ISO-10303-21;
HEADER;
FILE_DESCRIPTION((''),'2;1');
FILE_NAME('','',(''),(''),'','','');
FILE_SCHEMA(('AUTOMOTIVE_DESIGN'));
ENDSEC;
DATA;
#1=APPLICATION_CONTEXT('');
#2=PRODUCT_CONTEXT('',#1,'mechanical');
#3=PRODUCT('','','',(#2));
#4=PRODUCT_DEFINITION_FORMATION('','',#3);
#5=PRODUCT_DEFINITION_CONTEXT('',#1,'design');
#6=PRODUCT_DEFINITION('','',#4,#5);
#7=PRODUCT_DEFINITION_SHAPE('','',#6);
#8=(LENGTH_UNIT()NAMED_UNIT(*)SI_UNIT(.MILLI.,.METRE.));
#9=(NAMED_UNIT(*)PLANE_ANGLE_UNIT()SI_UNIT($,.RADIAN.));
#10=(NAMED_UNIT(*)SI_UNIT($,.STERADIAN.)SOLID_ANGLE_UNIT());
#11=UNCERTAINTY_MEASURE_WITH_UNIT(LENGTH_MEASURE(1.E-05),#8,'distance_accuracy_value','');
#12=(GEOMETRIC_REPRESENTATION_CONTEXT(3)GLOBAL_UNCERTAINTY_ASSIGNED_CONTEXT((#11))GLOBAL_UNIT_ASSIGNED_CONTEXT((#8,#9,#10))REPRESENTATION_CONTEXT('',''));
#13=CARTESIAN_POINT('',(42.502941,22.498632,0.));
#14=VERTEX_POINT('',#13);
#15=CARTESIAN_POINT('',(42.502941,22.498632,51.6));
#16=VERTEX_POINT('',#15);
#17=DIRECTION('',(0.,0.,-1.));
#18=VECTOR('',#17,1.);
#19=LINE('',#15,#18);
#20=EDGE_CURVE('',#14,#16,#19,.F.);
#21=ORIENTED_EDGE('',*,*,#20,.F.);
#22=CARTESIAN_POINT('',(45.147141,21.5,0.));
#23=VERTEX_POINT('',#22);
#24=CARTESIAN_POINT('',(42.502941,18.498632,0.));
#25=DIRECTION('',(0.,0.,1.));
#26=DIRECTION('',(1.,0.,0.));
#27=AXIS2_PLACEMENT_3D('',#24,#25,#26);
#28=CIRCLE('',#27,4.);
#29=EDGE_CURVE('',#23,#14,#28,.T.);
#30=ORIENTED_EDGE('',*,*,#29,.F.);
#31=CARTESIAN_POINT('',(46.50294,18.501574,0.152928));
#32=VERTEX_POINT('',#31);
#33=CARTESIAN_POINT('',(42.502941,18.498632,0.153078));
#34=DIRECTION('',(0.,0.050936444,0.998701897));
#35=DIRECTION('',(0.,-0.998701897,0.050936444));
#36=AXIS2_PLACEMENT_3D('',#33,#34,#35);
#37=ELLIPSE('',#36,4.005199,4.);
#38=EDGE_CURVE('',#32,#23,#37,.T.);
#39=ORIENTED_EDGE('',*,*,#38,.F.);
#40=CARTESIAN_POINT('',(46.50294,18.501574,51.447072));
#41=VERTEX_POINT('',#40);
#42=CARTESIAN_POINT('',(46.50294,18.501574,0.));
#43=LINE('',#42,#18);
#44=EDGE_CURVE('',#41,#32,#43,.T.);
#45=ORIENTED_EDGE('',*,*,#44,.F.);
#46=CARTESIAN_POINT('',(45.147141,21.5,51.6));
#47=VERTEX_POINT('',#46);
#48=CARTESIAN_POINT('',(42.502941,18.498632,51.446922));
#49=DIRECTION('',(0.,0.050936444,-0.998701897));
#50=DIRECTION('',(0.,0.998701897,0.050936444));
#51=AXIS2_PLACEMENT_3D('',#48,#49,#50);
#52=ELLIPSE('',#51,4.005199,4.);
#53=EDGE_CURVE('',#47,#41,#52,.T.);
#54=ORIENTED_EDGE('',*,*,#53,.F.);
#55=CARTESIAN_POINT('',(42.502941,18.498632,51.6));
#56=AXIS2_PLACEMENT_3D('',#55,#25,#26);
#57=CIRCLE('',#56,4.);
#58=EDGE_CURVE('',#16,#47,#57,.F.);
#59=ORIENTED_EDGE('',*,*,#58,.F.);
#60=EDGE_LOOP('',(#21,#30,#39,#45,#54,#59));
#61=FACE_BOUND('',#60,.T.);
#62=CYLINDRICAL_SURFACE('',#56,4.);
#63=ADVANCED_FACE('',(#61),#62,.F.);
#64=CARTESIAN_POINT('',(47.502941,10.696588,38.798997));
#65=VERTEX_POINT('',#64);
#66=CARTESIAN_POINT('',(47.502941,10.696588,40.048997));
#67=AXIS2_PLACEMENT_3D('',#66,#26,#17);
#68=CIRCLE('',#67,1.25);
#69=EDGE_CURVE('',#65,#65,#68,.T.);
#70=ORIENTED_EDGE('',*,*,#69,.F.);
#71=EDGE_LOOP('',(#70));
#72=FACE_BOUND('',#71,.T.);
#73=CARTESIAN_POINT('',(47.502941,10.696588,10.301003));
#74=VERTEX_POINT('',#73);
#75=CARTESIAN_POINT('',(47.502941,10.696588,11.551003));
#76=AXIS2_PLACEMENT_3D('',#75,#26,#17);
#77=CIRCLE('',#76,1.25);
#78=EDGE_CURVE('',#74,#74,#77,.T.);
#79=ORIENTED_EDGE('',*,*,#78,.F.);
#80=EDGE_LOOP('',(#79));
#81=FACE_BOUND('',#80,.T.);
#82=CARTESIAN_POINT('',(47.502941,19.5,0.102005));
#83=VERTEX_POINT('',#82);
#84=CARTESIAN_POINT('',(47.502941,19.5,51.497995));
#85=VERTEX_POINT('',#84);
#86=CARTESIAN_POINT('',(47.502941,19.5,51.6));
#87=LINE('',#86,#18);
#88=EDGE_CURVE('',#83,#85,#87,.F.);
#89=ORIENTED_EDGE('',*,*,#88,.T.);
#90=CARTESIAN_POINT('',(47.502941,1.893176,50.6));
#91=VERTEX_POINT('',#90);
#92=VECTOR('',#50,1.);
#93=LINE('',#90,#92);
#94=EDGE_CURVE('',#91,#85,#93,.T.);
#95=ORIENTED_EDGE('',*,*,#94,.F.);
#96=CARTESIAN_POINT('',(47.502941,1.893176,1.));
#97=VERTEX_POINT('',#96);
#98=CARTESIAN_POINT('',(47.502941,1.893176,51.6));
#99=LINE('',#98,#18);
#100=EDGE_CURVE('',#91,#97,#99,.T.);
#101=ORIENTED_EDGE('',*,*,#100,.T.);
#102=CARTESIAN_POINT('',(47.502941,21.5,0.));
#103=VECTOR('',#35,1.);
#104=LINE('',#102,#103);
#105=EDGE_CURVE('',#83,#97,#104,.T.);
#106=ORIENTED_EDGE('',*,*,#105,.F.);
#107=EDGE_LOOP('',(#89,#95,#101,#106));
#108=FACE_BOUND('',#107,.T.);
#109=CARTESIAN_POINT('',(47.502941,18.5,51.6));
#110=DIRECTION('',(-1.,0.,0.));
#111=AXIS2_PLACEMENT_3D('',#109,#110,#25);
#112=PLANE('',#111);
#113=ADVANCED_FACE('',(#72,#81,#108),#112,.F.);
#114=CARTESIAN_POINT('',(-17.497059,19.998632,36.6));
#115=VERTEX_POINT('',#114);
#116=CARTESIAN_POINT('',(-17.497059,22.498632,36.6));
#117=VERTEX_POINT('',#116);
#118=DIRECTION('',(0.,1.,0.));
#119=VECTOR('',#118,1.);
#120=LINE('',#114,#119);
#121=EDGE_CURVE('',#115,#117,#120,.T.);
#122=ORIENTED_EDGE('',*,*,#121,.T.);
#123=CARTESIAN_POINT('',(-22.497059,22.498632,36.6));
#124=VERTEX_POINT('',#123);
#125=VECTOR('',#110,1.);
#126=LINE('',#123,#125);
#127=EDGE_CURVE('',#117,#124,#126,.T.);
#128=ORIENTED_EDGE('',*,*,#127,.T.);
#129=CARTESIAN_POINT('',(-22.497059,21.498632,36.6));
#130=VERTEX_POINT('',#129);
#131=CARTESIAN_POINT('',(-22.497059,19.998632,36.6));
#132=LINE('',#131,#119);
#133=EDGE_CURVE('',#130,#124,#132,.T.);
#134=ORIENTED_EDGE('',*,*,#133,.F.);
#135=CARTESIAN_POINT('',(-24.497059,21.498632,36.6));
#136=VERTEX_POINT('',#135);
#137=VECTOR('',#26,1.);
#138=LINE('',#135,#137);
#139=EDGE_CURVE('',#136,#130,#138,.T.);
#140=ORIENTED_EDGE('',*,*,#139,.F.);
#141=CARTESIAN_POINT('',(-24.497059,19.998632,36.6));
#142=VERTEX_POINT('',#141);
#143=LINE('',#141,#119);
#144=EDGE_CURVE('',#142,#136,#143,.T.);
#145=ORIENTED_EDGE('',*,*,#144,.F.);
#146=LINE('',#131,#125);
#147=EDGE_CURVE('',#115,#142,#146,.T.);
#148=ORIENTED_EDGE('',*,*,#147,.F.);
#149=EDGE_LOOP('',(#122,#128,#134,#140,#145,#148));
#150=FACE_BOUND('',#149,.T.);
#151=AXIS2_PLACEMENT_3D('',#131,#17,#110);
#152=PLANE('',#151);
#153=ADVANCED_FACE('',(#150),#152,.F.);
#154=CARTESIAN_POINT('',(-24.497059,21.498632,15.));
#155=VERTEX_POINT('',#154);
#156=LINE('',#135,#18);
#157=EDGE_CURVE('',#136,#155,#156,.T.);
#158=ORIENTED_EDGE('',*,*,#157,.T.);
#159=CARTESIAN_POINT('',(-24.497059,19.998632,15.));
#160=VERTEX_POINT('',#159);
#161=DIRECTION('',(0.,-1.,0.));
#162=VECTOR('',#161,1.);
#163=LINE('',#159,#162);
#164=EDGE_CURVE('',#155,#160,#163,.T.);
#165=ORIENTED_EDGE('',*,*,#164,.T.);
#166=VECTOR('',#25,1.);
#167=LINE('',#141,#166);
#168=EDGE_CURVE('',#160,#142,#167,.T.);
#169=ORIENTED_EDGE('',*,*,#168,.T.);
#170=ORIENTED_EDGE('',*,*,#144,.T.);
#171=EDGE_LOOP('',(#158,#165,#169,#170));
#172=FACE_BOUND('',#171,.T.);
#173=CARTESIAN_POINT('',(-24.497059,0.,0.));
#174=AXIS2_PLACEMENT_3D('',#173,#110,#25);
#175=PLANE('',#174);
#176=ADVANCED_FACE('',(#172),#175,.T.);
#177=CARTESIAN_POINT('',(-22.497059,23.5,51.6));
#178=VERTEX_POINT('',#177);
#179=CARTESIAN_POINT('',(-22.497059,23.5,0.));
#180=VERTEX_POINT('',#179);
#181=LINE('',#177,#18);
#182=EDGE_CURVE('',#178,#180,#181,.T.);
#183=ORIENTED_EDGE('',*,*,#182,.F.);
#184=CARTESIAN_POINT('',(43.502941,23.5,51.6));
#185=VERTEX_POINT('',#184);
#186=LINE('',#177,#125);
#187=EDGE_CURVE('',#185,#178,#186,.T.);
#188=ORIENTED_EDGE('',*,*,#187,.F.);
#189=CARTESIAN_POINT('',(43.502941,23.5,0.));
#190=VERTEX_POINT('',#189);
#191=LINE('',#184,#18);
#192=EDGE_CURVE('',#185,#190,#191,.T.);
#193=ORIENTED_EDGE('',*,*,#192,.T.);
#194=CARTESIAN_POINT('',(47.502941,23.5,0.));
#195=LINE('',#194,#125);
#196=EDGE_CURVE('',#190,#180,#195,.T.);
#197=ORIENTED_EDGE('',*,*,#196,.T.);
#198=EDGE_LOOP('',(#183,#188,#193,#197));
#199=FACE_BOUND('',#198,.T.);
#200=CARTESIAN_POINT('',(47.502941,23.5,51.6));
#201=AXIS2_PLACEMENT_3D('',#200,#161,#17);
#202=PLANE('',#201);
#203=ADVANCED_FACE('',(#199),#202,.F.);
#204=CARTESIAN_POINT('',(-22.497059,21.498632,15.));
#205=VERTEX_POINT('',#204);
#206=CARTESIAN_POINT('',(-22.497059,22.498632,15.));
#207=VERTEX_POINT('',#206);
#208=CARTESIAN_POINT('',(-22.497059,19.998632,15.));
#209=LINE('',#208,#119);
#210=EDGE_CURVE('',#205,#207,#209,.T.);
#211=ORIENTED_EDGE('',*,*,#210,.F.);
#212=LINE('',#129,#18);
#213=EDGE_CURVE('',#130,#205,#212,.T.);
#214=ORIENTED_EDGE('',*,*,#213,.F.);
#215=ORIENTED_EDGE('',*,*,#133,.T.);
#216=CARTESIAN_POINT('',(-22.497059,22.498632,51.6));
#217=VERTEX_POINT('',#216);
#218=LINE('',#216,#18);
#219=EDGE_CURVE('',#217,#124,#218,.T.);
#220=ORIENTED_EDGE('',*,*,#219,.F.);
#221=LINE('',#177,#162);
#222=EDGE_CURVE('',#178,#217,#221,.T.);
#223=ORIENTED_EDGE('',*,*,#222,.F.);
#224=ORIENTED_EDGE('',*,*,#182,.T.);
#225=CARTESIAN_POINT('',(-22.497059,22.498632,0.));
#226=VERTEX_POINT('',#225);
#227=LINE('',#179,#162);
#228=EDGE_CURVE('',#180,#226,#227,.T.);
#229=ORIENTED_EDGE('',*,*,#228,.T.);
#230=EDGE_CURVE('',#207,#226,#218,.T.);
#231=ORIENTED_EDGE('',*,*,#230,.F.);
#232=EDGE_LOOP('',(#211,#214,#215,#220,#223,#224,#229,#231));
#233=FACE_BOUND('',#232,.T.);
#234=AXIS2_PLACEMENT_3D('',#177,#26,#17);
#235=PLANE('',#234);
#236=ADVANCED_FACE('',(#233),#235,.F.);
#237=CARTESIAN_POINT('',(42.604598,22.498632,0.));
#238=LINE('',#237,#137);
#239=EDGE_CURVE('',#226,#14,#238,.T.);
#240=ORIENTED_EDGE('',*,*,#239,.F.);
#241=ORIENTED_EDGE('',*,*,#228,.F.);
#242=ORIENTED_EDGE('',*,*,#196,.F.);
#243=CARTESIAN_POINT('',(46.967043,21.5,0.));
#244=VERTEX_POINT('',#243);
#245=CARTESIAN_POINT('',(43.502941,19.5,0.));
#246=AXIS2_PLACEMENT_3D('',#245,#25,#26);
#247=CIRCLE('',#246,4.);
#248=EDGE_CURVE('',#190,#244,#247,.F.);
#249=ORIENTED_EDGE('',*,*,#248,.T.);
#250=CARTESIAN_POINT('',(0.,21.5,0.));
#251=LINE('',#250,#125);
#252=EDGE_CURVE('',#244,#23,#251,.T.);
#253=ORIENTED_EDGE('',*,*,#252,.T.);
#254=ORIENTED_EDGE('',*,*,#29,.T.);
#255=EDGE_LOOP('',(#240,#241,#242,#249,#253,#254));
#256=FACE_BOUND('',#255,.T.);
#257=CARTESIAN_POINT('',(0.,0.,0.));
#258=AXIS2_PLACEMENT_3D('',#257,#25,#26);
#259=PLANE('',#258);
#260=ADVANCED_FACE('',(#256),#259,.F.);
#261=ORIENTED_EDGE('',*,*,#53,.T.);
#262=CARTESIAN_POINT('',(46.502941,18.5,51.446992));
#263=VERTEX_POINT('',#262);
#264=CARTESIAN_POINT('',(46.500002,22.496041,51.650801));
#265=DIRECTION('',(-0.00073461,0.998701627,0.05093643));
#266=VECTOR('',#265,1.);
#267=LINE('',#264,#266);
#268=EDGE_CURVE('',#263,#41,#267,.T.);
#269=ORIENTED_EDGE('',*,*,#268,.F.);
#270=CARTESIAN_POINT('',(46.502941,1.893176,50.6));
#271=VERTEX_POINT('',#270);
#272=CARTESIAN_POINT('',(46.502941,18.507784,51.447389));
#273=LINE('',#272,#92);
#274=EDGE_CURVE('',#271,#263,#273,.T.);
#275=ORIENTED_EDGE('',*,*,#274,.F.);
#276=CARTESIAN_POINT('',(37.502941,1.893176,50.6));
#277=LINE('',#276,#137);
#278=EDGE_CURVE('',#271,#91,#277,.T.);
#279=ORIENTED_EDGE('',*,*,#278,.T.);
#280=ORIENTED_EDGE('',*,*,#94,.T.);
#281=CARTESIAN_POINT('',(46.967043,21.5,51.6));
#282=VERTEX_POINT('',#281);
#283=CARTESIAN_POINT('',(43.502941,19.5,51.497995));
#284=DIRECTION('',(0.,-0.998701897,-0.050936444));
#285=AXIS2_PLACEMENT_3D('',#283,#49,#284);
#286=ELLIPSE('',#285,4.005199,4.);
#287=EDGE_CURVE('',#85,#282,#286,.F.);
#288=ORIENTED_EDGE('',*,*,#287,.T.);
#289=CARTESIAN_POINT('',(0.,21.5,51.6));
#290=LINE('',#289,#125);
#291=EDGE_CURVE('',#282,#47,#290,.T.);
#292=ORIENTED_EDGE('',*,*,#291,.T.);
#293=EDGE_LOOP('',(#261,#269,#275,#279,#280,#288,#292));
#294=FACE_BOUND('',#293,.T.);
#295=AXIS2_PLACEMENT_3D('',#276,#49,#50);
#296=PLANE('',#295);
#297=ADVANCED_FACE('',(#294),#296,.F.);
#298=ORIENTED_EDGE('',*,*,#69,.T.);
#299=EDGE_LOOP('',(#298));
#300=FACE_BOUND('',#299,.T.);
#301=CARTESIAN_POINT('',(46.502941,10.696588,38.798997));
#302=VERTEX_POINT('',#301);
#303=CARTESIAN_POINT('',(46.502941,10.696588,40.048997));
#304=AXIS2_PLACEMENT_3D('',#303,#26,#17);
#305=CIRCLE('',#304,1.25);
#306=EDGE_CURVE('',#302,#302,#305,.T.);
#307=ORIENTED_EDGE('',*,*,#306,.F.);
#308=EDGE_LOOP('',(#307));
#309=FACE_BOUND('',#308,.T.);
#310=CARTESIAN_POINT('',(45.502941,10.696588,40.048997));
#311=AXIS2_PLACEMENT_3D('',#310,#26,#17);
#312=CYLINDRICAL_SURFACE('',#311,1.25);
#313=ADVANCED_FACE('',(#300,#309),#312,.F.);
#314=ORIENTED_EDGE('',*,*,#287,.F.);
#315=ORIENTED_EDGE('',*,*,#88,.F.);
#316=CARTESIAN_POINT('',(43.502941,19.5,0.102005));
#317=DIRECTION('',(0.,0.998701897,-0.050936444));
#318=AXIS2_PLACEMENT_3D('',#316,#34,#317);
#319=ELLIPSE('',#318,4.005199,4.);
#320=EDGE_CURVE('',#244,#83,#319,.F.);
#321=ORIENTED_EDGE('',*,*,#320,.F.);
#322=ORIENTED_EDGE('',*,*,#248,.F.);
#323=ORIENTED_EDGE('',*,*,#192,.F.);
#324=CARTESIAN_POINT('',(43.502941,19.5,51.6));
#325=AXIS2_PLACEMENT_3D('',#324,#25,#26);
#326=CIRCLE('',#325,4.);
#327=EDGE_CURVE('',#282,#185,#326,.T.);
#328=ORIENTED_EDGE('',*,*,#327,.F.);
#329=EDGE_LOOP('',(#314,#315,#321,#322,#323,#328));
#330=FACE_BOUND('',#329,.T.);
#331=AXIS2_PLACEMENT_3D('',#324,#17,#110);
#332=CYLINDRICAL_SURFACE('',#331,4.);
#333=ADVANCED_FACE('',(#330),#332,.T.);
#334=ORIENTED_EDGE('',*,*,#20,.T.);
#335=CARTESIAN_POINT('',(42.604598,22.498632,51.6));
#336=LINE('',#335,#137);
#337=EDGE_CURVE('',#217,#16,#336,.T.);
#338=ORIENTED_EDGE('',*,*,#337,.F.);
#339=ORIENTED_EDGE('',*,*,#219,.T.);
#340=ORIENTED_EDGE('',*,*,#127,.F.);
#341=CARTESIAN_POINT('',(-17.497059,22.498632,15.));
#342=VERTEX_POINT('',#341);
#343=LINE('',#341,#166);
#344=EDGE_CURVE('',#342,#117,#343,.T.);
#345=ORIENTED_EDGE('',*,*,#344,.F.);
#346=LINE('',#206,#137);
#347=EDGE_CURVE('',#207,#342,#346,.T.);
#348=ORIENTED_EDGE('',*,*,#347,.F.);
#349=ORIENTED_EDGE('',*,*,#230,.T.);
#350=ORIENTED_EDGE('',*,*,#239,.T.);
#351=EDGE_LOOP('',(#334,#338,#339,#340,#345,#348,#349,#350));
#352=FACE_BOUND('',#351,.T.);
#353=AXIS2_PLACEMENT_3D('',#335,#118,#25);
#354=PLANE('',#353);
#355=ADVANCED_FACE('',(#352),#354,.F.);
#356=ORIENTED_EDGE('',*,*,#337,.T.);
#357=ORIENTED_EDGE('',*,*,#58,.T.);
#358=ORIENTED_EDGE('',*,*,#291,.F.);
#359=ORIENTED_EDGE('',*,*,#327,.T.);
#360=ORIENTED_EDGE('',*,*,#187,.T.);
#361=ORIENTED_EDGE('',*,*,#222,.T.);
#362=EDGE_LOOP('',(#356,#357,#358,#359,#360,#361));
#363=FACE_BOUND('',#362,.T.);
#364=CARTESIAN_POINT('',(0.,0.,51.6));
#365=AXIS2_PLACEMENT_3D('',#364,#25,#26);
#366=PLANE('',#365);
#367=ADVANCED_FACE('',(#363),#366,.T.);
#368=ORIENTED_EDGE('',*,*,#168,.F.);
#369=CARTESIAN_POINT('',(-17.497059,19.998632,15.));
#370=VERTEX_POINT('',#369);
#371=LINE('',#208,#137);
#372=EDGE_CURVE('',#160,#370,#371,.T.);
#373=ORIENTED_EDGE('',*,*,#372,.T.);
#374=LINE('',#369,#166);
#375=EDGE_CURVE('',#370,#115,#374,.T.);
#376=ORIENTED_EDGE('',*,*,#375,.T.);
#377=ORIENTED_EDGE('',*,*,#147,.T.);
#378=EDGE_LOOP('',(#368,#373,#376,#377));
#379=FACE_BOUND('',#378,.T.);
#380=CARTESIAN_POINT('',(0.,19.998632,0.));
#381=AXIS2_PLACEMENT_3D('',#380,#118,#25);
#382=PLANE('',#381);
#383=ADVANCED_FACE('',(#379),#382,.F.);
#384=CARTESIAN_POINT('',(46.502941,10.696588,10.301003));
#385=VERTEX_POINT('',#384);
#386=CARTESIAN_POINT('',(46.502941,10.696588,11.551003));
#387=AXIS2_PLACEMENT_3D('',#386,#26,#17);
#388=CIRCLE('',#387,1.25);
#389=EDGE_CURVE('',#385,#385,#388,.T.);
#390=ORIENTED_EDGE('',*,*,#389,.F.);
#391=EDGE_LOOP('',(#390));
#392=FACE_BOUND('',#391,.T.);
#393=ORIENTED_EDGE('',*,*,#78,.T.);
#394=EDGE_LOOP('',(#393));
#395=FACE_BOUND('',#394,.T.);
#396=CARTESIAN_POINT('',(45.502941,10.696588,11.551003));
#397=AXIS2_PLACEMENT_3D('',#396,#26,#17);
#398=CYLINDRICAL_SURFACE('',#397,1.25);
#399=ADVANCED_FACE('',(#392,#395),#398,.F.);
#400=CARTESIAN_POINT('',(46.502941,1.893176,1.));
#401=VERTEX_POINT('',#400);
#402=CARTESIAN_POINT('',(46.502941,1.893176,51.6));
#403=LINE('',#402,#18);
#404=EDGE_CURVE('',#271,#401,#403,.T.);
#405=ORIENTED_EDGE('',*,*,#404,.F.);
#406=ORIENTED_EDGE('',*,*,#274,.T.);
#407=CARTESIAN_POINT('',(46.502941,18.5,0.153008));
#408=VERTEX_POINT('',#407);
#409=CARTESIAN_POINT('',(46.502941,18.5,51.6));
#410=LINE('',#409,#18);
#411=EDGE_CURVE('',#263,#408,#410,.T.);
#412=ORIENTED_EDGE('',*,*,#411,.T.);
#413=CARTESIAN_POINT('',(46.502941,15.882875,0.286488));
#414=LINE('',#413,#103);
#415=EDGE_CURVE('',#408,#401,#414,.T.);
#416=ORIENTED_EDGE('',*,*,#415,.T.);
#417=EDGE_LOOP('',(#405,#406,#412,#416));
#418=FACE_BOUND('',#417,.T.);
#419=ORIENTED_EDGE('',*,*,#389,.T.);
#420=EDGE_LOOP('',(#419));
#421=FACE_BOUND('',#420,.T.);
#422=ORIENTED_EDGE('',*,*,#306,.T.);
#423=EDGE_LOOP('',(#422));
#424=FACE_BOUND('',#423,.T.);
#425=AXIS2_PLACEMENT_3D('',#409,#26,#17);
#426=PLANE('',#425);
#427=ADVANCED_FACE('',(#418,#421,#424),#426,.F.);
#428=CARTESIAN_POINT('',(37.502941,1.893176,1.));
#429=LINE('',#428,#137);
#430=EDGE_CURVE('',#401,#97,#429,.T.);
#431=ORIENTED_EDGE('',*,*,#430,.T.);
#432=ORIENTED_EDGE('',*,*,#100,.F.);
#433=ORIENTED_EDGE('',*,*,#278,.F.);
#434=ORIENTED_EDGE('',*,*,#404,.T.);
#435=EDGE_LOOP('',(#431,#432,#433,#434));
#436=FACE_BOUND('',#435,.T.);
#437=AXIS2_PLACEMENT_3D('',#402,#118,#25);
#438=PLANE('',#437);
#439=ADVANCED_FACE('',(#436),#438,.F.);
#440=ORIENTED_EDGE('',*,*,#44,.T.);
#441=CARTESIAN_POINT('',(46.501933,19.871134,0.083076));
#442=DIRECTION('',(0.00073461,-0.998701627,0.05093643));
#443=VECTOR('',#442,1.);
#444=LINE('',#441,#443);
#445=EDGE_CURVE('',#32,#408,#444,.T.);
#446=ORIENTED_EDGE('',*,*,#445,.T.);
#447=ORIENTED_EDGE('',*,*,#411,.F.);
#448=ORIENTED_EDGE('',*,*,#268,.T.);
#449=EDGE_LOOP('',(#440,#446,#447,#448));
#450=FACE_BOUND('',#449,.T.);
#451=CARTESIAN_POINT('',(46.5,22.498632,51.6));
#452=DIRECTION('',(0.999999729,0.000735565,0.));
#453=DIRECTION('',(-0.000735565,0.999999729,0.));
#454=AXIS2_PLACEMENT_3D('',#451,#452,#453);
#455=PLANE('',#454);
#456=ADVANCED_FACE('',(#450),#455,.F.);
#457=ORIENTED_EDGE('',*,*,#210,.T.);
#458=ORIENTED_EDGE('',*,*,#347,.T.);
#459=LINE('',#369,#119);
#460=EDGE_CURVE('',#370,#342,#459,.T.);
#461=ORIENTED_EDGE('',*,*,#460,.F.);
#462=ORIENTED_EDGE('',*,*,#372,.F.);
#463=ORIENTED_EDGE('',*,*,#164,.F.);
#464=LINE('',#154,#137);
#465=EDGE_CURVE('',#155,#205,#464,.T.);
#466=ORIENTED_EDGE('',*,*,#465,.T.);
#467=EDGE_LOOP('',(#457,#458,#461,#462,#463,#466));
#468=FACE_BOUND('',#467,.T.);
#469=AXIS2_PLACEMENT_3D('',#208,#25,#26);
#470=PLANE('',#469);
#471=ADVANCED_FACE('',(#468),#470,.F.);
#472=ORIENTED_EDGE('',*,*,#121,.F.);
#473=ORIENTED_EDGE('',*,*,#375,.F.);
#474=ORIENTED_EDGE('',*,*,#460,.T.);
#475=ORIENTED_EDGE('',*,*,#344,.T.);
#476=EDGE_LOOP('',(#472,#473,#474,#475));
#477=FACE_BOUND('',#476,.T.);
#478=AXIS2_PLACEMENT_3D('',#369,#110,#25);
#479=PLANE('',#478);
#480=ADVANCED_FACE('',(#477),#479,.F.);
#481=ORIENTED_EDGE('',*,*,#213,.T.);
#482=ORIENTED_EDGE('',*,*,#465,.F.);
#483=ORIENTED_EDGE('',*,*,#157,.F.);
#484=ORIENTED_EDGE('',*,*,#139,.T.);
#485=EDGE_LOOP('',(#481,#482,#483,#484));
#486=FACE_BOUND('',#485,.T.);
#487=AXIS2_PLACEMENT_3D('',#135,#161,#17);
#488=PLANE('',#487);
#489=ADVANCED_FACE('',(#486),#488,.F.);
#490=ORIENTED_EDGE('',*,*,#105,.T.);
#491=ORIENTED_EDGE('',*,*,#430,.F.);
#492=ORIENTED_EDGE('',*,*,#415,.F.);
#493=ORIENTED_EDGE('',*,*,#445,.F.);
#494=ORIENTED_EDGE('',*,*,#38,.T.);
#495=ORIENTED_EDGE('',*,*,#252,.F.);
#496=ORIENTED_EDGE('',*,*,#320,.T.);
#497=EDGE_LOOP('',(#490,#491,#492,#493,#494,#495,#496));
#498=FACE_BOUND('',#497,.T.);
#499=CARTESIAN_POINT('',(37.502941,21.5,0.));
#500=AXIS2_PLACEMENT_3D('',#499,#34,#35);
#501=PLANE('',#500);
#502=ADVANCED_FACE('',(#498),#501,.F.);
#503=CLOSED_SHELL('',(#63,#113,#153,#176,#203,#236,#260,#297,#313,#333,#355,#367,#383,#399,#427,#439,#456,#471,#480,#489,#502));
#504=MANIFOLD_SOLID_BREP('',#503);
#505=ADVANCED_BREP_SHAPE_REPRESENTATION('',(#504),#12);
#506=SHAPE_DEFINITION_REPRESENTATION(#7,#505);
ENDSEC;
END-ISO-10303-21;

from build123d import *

# Parameters (mm, degrees)
BOSS_EXTRUDE1_DEPTH = 51.6
CUT_EXTRUDE1_DEPTH  = 10
FILLET3_R           = 4
SKETCH4_W           = 5
SKETCH4_H           = 21.6
BOSS_EXTRUDE2_DEPTH = 2.5
SKETCH5_W           = 21.6
SKETCH5_H           = 1.5
BOSS_EXTRUDE3_DEPTH = 2
SKETCH6_R           = 1.25
CUT_EXTRUDE2_DEPTH  = 2


with BuildPart() as part:
    # Sketch1 → Boss-Extrude1 (new body)
    with BuildSketch(Plane.XY):
        Polygon((-22.497058746, 23.5), (-22.497058746, 22.498632165), (42.604598318, 22.498632165), (46.5, 22.498632165), (46.502941254, 18.5), (46.502941254, 1.893175959), (47.502941254, 1.893175959), (47.502941254, 18.5), (47.502941254, 23.5), (42.5, 23.5), align=None)
    extrude(amount=BOSS_EXTRUDE1_DEPTH)

    # Sketch3 → Cut-Extrude1 (cut)
    with BuildSketch(Plane(origin=(47.502941254, 0, 0), x_dir=(0, 0, -1), z_dir=(1, 0, 0))):
        Polygon((-51.6, 21.5), (-51.6, 1.893175959), (-50.6, 1.893175959), align=None)
        Polygon((0, 21.5), (-1, 1.893175959), (0, 1.893175959), align=None)
    extrude(amount=-CUT_EXTRUDE1_DEPTH, mode=Mode.SUBTRACT)

    # Fillet3
    fillet3_edges = [part.edges().sort_by_distance(p)[0] for p in [
        (46.5, 22.498632165, 25.8),
    ]]
    fillet(fillet3_edges, radius=FILLET3_R)
    fillet3_2_edges = [part.edges().sort_by_distance(p)[0] for p in [
        (47.502941254, 23.5, 25.8),
    ]]
    fillet(fillet3_2_edges, radius=FILLET3_R)

    # Sketch4 → Boss-Extrude2 (add)
    with BuildSketch(Plane.XZ.offset(-22.498632165)):
        with Locations((-19.997058746, 25.8)):
            Rectangle(SKETCH4_W, SKETCH4_H)
    extrude(amount=BOSS_EXTRUDE2_DEPTH)

    # Sketch5 → Boss-Extrude3 (add)
    with BuildSketch(Plane.ZY.offset(22.497058746)):
        with Locations((25.8, 20.748632165)):
            Rectangle(SKETCH5_W, SKETCH5_H)
    extrude(amount=BOSS_EXTRUDE3_DEPTH)

    # Sketch6 → Cut-Extrude2 (cut)
    with BuildSketch(Plane(origin=(47.502941254, 0, 0), x_dir=(0, 0, -1), z_dir=(1, 0, 0))):
        with Locations((-40.048997349, 10.696587979)):
            Circle(SKETCH6_R)
        with Locations((-11.551002651, 10.696587979)):
            Circle(SKETCH6_R)
    extrude(amount=-CUT_EXTRUDE2_DEPTH, mode=Mode.SUBTRACT)


solid = part.part
